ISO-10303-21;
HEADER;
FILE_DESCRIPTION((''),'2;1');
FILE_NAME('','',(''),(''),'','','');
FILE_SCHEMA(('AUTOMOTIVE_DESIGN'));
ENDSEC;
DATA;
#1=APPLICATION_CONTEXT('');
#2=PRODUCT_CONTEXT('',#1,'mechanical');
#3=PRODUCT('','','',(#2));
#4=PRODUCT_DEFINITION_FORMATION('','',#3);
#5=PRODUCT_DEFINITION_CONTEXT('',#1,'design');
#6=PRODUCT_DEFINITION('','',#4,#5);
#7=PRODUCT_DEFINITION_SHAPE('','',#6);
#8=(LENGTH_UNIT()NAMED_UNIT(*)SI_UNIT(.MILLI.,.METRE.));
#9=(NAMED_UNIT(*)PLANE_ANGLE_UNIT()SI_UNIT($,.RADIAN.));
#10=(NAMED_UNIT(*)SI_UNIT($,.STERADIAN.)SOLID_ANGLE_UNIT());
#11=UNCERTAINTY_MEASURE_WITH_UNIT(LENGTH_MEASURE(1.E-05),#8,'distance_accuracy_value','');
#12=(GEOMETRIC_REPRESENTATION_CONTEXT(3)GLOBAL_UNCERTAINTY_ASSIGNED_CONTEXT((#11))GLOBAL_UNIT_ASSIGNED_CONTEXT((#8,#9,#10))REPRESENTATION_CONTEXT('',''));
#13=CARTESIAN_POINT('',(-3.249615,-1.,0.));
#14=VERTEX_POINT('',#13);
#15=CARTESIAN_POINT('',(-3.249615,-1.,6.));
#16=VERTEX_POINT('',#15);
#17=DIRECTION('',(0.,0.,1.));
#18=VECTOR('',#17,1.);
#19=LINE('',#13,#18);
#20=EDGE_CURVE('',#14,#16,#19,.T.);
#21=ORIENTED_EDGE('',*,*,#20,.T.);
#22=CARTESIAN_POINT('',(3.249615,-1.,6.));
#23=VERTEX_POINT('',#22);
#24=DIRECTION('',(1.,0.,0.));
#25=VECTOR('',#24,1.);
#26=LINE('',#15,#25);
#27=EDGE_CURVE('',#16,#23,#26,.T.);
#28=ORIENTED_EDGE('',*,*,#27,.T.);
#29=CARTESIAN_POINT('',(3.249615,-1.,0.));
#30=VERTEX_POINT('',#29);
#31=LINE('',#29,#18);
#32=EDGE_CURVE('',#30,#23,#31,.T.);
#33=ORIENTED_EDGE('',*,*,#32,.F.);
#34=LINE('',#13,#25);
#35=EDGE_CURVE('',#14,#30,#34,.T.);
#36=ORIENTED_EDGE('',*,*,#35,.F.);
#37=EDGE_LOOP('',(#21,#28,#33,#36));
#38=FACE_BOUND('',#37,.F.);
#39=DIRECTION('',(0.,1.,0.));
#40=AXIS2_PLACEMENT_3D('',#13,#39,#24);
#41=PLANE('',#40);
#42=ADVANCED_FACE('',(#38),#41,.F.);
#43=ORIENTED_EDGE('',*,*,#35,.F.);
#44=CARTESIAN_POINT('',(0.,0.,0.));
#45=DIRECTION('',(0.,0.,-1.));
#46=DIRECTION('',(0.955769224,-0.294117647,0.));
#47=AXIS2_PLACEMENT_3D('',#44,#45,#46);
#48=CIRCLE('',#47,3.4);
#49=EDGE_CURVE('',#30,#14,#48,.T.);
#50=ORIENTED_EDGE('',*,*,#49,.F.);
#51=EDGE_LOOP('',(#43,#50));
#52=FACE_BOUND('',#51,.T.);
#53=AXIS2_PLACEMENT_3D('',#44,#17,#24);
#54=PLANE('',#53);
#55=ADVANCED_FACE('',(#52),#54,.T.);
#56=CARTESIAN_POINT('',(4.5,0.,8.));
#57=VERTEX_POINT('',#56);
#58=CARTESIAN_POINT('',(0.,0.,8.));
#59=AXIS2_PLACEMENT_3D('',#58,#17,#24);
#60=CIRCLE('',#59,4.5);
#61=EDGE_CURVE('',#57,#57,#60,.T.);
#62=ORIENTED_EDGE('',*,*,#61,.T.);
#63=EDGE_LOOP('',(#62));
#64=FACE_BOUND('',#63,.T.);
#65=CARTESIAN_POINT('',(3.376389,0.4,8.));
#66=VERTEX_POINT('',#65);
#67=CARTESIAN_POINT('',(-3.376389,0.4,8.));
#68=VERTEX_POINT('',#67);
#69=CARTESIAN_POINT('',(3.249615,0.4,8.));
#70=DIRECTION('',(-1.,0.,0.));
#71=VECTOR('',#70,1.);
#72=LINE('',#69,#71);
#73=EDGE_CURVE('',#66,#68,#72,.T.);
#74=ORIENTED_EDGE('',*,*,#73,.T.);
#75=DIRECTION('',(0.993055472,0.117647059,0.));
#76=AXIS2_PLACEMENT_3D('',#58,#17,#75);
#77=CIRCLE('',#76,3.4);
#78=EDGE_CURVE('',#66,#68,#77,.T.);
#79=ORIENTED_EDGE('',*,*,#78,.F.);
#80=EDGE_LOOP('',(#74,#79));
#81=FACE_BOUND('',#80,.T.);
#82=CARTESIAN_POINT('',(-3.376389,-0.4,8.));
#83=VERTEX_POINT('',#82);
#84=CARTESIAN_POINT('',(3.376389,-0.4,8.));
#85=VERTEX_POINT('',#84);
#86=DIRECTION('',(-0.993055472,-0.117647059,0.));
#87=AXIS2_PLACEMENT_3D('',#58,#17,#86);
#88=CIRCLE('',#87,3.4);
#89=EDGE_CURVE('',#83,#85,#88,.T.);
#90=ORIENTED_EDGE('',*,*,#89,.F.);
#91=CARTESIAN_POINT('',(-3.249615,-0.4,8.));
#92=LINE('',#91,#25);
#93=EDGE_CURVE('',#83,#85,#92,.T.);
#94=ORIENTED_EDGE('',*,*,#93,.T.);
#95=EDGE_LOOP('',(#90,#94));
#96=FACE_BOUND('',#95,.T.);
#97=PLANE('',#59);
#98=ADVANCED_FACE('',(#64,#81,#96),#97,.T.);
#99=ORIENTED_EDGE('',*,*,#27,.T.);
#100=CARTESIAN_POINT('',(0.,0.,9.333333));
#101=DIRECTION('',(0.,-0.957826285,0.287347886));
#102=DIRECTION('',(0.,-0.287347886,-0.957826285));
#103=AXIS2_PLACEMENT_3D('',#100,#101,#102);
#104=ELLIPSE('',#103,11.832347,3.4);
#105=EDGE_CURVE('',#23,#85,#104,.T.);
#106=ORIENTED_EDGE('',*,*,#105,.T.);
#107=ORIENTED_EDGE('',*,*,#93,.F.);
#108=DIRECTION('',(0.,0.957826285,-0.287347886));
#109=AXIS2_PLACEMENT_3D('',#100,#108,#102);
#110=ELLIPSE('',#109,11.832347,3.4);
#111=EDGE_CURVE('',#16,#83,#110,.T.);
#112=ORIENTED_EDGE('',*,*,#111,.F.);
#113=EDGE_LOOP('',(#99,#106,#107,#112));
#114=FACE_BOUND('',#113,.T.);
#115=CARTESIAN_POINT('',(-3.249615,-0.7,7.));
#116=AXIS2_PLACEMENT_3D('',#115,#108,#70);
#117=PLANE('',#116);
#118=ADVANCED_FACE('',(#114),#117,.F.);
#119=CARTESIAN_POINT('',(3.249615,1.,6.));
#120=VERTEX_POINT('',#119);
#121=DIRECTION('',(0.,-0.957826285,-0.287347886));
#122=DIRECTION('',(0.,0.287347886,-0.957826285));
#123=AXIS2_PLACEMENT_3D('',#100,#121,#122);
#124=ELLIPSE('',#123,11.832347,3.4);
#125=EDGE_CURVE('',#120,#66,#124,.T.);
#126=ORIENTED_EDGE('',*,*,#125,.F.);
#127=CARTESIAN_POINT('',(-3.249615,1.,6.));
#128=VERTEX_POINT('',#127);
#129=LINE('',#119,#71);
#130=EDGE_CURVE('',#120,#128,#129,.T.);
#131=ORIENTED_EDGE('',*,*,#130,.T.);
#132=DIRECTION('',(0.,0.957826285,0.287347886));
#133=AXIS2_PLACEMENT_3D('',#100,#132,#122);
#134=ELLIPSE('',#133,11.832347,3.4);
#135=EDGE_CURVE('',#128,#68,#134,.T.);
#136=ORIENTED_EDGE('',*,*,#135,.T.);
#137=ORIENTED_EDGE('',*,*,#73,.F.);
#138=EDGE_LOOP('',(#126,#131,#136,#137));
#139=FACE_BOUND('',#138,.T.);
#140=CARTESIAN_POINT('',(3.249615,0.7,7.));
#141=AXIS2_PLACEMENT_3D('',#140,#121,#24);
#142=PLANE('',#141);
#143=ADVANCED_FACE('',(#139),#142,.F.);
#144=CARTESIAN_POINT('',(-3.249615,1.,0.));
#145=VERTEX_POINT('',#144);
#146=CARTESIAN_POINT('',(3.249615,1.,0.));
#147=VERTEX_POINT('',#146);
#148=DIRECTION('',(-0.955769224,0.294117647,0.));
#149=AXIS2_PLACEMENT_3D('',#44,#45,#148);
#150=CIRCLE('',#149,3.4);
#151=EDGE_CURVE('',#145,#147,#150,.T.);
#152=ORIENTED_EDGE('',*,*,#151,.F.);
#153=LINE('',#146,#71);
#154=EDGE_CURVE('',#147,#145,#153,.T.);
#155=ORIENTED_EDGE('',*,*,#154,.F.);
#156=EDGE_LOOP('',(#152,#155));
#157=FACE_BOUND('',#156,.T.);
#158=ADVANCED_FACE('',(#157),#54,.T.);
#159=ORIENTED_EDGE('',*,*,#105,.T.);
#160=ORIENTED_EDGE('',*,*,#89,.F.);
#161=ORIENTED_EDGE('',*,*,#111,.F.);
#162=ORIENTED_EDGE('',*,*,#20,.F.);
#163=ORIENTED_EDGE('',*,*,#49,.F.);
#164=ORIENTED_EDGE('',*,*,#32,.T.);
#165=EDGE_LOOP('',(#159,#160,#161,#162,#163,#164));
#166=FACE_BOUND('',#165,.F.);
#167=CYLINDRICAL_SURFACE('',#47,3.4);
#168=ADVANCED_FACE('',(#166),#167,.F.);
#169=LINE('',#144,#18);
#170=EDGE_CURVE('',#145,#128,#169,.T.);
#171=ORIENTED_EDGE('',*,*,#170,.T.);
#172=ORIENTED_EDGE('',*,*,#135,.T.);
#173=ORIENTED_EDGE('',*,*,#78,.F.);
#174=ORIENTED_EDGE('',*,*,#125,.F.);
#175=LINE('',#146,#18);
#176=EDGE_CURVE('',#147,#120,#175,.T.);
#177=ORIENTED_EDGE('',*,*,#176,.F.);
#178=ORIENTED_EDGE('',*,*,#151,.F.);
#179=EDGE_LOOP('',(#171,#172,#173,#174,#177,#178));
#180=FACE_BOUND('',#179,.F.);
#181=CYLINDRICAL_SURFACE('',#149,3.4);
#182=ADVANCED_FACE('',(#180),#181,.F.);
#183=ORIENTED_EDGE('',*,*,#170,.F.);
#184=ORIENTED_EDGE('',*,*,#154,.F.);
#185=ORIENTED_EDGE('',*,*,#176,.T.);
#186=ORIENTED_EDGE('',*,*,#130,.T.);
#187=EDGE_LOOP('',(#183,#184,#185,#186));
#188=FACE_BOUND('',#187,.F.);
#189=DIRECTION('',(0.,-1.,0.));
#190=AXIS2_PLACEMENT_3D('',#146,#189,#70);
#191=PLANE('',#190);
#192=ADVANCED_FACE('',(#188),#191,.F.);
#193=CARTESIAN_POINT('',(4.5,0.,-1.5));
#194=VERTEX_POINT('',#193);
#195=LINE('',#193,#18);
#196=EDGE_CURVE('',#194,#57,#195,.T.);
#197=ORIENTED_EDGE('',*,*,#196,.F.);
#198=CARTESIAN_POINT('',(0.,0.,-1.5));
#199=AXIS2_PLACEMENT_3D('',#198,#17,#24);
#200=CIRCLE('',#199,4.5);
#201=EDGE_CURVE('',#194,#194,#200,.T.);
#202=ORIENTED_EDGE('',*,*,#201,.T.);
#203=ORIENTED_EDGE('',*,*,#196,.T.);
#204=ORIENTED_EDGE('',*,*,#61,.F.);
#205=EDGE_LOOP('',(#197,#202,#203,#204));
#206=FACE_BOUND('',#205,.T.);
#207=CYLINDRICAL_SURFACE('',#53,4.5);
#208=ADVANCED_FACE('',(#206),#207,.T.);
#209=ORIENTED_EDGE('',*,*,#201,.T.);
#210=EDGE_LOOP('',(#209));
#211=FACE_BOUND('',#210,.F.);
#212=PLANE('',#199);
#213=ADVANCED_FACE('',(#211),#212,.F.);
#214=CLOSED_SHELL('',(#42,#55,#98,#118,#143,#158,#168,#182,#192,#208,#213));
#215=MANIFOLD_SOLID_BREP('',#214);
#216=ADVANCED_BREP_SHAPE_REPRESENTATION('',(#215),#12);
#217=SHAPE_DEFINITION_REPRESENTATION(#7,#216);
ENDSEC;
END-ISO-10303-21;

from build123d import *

# Parameters (mm, degrees)
F0_R       = 4.5
F1_DEPTH   = 8
F2_SIZE2   = 0.6
F2_SIZE    = 2
F2_2_SIZE2 = 0.6
F2_2_SIZE  = 2
F3_DEPTH   = 1.5


# Not quite as in the source:
# - a feature names something its author has since deleted; it is built from what else it names


with BuildPart() as f1:
    # F0 (on Top) → F1 (new body)
    with BuildSketch(Plane.XY):
        Circle(F0_R)
        with BuildLine():
            ThreePointArc((3.2496153619, 1), (3.3621936463, 0.5056222749), (3.4, 0))
            ThreePointArc((3.4, 0), (3.3621936463, -0.5056222749), (3.2496153619, -1))
            ThreePointArc((3.2496153619, -1), (0, -3.4), (-3.2496153619, -1))
            ThreePointArc((-3.2496153619, -1), (-3.4, 0), (-3.2496153619, 1))
            ThreePointArc((-3.2496153619, 1), (0, 3.4), (3.2496153619, 1))
        make_face(mode=Mode.SUBTRACT)
        with BuildLine():
            ThreePointArc((3.2496153619, -1), (3.3621936463, -0.5056222749), (3.4, 0))
            ThreePointArc((3.4, 0), (3.3621936463, 0.5056222749), (3.2496153619, 1))
            Line((3.2496153619, 1), (-3.2496153619, 1))
            ThreePointArc((-3.2496153619, 1), (-3.4, 0), (-3.2496153619, -1))
            Line((-3.2496153619, -1), (3.2496153619, -1))
        make_face()
    extrude(amount=F1_DEPTH)

    # F2
    f2_edges = [f1.edges().sort_by_distance(p)[0] for p in [
        (0, 1, 8),
    ]]
    f2_side = f1.faces().sort_by_distance((0, 1, 4))[0]
    chamfer(f2_edges, length=F2_SIZE, length2=F2_SIZE2, reference=f2_side)

    # F2#2
    f2_2_edges = [f1.edges().sort_by_distance(p)[0] for p in [
        (0, -1, 8),
    ]]
    f2_2_side = f1.faces().sort_by_distance((0, -1, 4))[0]
    chamfer(f2_2_edges, length=F2_2_SIZE, length2=F2_2_SIZE2, reference=f2_2_side)

    # F0 (on Top) → F3 (join)
    with BuildSketch(Plane.XY):
        Circle(F0_R)
        with BuildLine():
            ThreePointArc((3.2496153619, 1), (3.3621936463, 0.5056222749), (3.4, 0))
            ThreePointArc((3.4, 0), (3.3621936463, -0.5056222749), (3.2496153619, -1))
            ThreePointArc((3.2496153619, -1), (0, -3.4), (-3.2496153619, -1))
            ThreePointArc((-3.2496153619, -1), (-3.4, 0), (-3.2496153619, 1))
            ThreePointArc((-3.2496153619, 1), (0, 3.4), (3.2496153619, 1))
        make_face(mode=Mode.SUBTRACT)
        with BuildLine():
            ThreePointArc((3.2496153619, -1), (3.3621936463, -0.5056222749), (3.4, 0))
            ThreePointArc((3.4, 0), (3.3621936463, 0.5056222749), (3.2496153619, 1))
            Line((3.2496153619, 1), (-3.2496153619, 1))
            ThreePointArc((-3.2496153619, 1), (-3.4, 0), (-3.2496153619, -1))
            Line((-3.2496153619, -1), (3.2496153619, -1))
        make_face()
        with BuildLine():
            Line((-3.2496153619, 1), (3.2496153619, 1))
            ThreePointArc((3.2496153619, 1), (0, 3.4), (-3.2496153619, 1))
        make_face()
        with BuildLine():
            ThreePointArc((-3.2496153619, -1), (0, -3.4), (3.2496153619, -1))
            Line((3.2496153619, -1), (-3.2496153619, -1))
        make_face()
    extrude(amount=-F3_DEPTH)


solid = f1.part
